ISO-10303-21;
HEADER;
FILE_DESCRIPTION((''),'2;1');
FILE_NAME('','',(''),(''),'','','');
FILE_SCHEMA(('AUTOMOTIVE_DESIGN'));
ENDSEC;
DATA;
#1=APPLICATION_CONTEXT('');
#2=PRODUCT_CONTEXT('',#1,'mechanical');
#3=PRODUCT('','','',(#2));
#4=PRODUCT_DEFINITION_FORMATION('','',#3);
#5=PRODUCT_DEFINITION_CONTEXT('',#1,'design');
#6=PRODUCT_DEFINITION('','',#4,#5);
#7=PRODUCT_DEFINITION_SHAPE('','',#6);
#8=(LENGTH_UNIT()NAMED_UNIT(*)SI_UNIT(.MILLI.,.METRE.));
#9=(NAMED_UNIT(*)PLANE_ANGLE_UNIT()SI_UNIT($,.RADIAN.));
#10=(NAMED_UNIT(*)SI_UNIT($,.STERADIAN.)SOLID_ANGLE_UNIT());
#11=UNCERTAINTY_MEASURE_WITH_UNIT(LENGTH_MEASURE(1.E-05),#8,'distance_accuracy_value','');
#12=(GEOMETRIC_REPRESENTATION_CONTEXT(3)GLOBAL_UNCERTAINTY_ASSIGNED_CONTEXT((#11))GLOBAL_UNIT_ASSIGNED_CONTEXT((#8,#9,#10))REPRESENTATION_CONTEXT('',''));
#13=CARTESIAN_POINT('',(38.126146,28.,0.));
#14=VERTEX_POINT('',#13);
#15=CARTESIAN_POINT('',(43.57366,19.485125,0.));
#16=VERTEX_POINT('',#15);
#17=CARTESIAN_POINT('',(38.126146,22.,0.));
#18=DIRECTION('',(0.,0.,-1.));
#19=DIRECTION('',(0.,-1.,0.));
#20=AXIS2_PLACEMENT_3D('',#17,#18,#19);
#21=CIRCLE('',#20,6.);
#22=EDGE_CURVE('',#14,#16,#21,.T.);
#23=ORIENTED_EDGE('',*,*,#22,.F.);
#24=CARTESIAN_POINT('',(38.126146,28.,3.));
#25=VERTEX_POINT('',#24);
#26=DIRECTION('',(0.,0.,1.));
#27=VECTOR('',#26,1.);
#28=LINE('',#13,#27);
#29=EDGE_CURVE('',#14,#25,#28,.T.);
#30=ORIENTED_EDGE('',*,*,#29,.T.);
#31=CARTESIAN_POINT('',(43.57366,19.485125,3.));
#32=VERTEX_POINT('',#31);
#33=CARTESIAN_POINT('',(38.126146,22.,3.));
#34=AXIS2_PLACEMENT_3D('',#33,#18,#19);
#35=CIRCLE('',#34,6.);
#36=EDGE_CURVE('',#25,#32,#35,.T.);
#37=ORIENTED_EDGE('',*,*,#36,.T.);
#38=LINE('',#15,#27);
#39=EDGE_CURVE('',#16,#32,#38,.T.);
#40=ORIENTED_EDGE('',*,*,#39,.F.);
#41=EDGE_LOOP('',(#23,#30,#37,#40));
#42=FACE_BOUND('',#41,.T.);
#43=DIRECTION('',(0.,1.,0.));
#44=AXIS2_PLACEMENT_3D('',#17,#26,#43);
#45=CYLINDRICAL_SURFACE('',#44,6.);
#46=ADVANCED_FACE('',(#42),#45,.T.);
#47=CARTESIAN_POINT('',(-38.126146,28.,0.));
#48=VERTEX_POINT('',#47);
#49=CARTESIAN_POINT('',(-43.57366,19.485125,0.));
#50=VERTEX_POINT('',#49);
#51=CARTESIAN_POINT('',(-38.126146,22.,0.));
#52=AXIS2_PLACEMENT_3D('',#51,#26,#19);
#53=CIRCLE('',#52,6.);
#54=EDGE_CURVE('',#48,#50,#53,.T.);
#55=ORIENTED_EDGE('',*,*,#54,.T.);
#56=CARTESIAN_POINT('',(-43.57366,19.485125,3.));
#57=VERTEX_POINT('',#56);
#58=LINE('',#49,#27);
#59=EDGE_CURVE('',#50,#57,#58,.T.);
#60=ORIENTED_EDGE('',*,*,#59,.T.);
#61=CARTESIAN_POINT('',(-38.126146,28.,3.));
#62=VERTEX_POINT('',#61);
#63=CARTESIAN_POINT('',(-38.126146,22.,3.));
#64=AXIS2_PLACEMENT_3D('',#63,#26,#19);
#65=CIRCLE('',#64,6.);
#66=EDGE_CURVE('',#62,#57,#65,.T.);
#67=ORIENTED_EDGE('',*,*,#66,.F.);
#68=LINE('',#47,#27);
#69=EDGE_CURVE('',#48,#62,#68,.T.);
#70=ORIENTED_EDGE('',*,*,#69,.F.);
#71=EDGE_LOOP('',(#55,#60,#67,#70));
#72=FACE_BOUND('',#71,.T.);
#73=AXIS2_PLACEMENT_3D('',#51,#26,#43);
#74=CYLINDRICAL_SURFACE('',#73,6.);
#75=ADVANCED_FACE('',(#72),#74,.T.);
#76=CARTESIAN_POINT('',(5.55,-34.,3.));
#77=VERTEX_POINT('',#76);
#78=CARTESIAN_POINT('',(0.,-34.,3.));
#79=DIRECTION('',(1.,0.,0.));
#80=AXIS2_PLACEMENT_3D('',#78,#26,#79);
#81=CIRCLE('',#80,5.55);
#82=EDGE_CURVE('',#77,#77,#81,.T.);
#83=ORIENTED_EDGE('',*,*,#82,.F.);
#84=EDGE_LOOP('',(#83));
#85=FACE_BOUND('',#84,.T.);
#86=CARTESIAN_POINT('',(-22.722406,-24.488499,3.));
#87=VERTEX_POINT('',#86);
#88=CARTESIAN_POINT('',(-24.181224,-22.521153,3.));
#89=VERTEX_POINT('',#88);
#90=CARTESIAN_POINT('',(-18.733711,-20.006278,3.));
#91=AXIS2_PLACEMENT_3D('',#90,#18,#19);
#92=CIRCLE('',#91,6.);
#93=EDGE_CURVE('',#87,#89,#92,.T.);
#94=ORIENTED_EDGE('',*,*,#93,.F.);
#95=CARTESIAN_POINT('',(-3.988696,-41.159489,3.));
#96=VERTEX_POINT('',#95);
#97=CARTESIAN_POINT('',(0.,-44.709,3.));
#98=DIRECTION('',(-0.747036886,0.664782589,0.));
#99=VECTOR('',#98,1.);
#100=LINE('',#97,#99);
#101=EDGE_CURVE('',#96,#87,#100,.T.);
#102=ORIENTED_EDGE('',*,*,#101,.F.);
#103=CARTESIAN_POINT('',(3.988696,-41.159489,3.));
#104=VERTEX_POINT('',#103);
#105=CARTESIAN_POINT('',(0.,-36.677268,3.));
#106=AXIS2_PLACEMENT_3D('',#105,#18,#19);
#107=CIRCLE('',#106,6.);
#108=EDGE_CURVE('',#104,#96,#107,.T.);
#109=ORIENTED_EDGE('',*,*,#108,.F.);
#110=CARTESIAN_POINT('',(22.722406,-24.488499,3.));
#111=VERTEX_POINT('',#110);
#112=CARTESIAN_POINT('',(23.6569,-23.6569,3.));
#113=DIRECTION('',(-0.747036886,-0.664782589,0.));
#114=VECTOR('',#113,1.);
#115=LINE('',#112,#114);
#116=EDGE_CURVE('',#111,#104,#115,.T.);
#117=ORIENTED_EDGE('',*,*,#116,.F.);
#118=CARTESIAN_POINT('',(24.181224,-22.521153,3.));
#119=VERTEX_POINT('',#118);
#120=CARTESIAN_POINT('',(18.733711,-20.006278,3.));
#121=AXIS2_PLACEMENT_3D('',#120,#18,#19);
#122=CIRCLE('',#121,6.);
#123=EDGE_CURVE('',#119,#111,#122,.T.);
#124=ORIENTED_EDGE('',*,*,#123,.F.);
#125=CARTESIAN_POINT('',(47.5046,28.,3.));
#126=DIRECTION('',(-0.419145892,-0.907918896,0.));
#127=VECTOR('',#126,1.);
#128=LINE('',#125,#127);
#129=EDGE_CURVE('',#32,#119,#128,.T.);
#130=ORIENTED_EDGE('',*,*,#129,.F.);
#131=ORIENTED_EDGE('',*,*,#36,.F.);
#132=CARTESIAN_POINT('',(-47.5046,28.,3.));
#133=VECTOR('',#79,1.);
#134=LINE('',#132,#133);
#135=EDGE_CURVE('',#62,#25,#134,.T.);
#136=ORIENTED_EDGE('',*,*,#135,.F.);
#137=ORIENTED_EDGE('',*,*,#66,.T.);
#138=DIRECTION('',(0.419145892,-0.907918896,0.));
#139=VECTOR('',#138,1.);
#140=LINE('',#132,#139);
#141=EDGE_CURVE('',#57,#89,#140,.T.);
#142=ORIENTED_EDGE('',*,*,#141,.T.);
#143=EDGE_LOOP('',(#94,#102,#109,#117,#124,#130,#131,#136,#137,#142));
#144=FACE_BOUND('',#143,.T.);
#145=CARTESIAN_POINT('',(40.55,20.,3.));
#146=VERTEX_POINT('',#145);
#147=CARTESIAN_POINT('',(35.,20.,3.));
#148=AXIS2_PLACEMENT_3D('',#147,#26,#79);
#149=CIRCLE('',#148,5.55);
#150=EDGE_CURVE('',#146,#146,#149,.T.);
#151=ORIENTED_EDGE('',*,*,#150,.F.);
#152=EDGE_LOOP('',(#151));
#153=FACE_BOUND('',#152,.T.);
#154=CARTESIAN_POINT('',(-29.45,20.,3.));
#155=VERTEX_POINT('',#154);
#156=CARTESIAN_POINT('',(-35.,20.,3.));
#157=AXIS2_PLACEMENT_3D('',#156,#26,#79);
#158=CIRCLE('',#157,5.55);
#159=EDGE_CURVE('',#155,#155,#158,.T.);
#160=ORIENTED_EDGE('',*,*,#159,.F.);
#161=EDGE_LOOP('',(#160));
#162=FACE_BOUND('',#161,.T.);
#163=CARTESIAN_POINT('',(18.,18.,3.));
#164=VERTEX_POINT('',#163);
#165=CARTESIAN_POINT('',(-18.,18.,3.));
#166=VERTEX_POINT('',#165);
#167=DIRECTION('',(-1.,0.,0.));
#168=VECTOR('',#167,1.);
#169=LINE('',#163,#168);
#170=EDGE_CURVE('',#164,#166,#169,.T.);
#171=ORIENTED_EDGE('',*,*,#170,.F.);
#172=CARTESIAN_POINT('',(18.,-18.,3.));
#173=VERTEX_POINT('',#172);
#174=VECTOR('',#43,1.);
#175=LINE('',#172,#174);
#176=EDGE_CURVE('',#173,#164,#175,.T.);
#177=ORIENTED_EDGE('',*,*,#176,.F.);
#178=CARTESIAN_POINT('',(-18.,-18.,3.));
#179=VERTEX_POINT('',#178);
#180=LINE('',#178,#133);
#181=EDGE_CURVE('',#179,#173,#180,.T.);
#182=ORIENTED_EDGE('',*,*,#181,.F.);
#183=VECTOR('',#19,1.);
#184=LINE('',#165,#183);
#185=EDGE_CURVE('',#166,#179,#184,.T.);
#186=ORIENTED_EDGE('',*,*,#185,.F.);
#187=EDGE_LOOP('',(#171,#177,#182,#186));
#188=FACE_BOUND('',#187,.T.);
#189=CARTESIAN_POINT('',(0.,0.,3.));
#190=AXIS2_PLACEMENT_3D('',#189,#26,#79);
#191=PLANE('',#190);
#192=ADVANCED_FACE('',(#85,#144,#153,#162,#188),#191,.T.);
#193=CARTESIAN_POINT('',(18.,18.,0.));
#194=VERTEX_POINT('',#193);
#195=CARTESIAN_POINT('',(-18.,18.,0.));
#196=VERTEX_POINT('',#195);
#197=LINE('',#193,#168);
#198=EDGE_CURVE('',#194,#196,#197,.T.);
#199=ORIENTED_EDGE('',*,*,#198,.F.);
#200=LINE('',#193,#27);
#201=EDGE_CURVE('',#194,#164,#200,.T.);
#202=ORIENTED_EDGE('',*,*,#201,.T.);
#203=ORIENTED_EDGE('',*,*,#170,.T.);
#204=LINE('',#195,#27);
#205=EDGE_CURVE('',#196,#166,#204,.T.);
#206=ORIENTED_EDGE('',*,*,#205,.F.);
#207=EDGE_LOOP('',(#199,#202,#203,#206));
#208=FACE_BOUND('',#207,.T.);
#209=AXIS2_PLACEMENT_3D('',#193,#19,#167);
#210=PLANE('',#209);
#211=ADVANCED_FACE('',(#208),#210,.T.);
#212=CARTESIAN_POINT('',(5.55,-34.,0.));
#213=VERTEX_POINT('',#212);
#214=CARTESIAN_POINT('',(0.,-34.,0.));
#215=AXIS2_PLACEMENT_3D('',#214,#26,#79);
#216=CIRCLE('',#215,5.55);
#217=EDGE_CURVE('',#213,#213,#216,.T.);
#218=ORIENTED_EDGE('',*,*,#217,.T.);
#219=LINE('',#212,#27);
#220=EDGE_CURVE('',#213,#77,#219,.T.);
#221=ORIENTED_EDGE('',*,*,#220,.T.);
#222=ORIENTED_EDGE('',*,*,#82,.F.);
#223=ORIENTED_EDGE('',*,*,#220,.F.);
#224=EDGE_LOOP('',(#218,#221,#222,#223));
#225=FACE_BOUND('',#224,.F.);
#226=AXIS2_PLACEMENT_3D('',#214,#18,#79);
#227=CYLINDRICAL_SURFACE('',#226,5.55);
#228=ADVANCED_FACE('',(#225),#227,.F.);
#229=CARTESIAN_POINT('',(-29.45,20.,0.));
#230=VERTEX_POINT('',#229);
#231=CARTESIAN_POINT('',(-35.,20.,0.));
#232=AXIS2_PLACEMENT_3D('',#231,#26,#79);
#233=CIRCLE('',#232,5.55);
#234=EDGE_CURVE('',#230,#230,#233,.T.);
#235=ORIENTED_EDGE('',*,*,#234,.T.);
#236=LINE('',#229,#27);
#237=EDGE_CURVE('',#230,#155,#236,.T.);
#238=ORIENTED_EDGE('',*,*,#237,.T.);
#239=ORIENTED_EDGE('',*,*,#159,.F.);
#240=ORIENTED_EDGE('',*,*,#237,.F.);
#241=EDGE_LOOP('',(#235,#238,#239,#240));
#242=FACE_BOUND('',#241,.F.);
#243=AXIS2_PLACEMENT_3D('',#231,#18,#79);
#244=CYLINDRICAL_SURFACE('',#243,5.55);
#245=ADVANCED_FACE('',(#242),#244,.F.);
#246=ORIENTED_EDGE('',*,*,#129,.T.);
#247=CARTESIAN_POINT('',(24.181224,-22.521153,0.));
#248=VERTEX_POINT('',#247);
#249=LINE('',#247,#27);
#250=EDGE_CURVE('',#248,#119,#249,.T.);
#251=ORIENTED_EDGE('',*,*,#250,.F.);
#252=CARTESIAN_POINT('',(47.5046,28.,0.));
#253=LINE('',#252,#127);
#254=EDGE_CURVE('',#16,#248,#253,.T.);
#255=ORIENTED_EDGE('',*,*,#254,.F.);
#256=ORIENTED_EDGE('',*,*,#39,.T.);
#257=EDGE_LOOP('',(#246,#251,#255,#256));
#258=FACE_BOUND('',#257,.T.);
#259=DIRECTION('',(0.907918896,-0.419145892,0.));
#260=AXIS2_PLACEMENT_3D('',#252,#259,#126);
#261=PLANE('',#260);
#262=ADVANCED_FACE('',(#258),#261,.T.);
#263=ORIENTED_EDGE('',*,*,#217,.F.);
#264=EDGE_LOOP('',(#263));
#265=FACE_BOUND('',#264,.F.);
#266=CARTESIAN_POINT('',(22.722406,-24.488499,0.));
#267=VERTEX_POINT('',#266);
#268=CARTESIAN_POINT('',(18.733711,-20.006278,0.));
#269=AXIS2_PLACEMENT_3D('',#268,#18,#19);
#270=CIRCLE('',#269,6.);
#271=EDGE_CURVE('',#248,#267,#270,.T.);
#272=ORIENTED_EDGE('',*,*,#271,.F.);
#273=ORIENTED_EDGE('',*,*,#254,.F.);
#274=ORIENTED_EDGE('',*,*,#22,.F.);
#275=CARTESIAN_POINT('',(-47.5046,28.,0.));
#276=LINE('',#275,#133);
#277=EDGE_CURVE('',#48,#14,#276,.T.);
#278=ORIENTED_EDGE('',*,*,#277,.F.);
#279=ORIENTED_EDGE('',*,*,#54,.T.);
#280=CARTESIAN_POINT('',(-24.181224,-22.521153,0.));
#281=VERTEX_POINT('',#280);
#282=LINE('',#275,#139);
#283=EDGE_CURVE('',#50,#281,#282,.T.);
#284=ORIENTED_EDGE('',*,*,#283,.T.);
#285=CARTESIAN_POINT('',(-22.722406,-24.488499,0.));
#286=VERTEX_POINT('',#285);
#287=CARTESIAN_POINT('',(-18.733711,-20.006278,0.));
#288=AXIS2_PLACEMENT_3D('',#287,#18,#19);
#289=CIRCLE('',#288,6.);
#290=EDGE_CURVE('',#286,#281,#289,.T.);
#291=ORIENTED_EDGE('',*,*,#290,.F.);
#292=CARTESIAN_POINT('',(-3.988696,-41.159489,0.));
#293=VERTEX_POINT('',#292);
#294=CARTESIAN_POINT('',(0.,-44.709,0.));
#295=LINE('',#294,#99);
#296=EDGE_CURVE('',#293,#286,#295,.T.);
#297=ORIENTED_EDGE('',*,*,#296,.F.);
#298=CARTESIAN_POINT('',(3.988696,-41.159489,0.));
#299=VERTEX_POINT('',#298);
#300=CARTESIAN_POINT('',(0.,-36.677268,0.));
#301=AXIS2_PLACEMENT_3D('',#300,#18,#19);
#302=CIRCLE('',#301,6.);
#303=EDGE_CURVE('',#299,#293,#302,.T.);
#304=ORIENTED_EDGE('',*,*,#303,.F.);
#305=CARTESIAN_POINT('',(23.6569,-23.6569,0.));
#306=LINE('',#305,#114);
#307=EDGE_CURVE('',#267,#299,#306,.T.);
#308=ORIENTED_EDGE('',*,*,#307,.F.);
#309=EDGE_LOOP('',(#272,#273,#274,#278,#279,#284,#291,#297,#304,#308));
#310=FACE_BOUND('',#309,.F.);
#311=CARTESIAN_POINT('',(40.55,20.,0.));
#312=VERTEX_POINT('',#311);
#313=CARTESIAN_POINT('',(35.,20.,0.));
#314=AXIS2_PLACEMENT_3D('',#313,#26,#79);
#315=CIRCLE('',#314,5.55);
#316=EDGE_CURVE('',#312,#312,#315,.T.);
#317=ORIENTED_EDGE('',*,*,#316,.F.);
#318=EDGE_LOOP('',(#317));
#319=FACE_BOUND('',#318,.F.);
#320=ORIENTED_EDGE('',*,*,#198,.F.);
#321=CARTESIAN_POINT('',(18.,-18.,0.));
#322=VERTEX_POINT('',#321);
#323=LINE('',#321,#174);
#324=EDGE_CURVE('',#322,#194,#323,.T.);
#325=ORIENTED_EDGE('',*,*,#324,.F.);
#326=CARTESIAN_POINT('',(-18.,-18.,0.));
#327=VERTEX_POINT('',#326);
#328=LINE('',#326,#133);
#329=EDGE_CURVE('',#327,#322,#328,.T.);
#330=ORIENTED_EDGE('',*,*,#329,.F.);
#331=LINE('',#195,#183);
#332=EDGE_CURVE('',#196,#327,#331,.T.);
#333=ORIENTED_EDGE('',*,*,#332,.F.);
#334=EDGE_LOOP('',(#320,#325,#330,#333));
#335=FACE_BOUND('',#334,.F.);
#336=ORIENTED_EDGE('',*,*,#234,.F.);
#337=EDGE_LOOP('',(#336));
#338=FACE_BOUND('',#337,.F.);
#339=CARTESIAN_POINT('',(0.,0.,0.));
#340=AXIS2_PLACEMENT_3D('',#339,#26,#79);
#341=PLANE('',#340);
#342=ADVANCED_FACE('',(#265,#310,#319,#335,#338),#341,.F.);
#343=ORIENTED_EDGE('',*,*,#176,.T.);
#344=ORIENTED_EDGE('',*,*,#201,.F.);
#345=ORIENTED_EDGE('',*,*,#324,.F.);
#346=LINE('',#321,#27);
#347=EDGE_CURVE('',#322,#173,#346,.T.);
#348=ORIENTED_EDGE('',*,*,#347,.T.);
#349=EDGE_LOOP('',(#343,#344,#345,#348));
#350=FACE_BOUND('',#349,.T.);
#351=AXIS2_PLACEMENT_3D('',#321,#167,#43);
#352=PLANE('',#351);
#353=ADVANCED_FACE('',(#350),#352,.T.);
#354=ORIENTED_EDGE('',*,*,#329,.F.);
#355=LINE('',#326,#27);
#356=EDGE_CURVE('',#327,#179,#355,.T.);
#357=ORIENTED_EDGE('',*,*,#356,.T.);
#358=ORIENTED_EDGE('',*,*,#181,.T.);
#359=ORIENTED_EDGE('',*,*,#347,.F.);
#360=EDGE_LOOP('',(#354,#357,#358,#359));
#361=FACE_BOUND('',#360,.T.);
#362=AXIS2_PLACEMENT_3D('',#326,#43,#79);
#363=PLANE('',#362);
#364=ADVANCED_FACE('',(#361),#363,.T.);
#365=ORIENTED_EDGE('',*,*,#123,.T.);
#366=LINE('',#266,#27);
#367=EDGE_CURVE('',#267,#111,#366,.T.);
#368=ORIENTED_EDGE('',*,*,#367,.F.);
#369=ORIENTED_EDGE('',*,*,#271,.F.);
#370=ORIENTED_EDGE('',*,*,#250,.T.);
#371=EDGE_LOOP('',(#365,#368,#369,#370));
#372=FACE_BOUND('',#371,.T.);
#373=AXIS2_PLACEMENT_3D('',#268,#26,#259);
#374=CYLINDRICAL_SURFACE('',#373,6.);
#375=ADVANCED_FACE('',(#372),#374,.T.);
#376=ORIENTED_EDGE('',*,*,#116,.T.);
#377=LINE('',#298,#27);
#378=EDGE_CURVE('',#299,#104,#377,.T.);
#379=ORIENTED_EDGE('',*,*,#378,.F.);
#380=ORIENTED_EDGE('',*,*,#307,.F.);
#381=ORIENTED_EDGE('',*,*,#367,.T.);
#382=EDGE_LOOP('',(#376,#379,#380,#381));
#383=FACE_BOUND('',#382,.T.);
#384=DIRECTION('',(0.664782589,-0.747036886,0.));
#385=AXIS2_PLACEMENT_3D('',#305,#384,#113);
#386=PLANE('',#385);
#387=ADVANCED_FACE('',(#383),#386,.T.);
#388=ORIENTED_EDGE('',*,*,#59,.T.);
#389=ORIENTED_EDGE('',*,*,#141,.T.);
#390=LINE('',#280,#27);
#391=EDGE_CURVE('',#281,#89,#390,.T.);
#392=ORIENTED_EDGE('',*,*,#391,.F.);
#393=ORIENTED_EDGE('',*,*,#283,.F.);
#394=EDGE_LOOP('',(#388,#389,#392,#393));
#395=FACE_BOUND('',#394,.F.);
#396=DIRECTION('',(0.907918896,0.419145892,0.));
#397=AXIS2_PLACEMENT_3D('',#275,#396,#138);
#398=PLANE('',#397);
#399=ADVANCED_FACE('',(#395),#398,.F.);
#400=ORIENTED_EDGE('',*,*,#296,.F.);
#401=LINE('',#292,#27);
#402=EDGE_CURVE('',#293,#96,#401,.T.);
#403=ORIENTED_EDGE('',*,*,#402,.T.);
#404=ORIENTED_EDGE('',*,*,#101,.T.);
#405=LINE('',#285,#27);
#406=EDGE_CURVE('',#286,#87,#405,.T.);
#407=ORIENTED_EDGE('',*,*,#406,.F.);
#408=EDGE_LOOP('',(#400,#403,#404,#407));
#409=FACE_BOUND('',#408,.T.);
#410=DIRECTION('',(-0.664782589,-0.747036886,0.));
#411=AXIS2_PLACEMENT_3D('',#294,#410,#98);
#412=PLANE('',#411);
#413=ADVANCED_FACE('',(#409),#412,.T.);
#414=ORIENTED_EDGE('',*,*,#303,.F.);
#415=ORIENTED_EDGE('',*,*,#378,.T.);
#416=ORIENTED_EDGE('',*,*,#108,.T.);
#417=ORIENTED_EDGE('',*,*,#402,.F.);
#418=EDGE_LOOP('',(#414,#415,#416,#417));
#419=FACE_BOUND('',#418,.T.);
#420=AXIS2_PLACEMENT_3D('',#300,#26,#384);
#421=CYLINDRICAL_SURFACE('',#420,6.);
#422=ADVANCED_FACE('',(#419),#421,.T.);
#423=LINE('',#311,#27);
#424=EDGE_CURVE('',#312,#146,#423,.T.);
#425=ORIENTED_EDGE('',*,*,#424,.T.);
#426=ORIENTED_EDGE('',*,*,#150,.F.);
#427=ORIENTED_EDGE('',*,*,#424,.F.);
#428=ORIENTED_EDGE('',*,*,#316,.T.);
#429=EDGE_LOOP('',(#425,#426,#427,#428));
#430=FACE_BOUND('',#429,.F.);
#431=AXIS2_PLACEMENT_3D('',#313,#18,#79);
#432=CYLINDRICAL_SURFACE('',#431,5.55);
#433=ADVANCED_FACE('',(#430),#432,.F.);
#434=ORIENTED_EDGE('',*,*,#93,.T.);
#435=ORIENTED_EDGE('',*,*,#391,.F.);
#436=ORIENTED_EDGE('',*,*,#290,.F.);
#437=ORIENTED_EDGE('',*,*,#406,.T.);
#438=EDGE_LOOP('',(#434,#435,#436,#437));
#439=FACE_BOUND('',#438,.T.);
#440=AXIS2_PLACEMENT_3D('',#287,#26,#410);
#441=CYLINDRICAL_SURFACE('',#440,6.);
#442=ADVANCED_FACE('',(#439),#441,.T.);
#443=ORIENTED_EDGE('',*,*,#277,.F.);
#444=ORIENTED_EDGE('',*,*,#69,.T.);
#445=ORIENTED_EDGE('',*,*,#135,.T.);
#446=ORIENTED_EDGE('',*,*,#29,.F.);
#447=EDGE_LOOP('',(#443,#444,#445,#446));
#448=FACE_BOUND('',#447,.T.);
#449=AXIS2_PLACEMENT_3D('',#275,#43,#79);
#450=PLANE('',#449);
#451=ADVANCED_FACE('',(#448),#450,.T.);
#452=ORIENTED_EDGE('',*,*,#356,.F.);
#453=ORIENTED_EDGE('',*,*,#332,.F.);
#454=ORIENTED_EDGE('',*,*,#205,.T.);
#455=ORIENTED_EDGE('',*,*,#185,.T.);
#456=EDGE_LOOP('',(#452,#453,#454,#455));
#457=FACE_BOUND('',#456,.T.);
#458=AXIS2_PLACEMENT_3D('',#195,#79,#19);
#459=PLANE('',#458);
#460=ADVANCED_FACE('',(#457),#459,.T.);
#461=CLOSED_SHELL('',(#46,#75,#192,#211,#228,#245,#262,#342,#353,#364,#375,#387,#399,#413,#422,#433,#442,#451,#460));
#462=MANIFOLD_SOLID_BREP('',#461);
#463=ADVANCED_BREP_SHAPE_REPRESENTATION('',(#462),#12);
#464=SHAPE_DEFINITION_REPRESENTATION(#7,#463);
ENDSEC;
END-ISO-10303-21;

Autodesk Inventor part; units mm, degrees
ref_plane "YZ Plane" through (0, 0, 0) normal (1, 0, 0) x (0, 1, 0)
ref_plane "XZ Plane" through (0, 0, 0) normal (0, 1, 0) x (-1, 0, 0)
ref_plane "XY Plane" through (0, 0, 0) normal (0, 0, 1) x (1, 0, 0)
sketch "Sketch6" plane through (0, 0, 0) normal (0, 0, 1) x (1, 0, 0)
  line L0 (18, 18) -> (-18, 18)
  line L1 (-18, 18) -> (-18, -18)
  line L2 (-18, -18) -> (18, -18)
  line L3 (18, -18) -> (18, 18)
  line L4 (18, 18) -> (-18, -18) construction
  circle A0 centre (0, -34) radius 5.55
  circle A1 centre (35, 20) radius 5.55
  circle A2 centre (-35, 20) radius 5.55
  line L5 (35, 20) -> (-35, 20) construction
  line L6 (-35, 20) -> (0, -34) construction
  line L7 (0, -34) -> (35, 20) construction
  line L8 (0, 18) -> (0, -18) construction
  line L9 (-47.5046, 28) -> (47.5046, 28)
  line L10 (-18, 18) -> (23.6569, -23.6569) construction
  line L11 (18, 18) -> (-23.6569, -23.6569) construction
  line L12 (47.5046, 28) -> (23.6569, -23.6569)
  line L13 (23.6569, -23.6569) -> (0, -44.709)
  line L14 (0, -44.709) -> (-23.6569, -23.6569)
  line L15 (-47.5046, 28) -> (-23.6569, -23.6569)
  line L16 (-35, 20) -> (-42.2633, 16.6468) construction
  line L17 (0, -34) -> (-5.3183, -39.9763) construction
  point P0 (0, 0)
  point P1 (0, 0)
  point P2 (60, 0)
  point P3 (0, 28)
  point P4 (0, 0)
  dimension "d30" = 36
  dimension "d31" = 36
  dimension "d33" = 11.1
  dimension "d37" = 64.3506
  dimension "d52" = 70
  dimension "d53" = 8
  dimension "d54" = 20
  dimension "d57" = 8
  dimension "d59" = 8
  dimension "d60" = 95.0092
  dimension "d61" = 54
  dimension "d62" = 8
  dimension "d63" = 8
  dimension "d64" = 10
extrude "Plate3" add sketch "Sketch6" along normal blind 3
fillet "Corner Round2" radius 6 5 edges at (-47.5046, 28, 1.5) (47.5046, 28, 1.5) (0, -44.709, 1.5) (-23.6569, -23.6569, 1.5) (23.6569, -23.6569, 1.5)
equation "\"d41\" = Thickness"
equation "\"BendReliefWidth\" = Thickness"
equation "\"BendReliefDepth\" = 0.5 * Thickness"
equation "\"CornerReliefSize\" = 4 * Thickness"
equation "\"MinimumRemnant\" = 2 * Thickness"
equation "\"TransitionRadius\" = BendRadius"
equation "\"JacobiRadiusSize\" = BendRadius"
equation "\"GapSize\" = Thickness"
equation "\"Thickness\" = 3"
equation "\"BendRadius\" = 5"
properties part number "DSB-507 beam flange" material "Stainless Steel"
